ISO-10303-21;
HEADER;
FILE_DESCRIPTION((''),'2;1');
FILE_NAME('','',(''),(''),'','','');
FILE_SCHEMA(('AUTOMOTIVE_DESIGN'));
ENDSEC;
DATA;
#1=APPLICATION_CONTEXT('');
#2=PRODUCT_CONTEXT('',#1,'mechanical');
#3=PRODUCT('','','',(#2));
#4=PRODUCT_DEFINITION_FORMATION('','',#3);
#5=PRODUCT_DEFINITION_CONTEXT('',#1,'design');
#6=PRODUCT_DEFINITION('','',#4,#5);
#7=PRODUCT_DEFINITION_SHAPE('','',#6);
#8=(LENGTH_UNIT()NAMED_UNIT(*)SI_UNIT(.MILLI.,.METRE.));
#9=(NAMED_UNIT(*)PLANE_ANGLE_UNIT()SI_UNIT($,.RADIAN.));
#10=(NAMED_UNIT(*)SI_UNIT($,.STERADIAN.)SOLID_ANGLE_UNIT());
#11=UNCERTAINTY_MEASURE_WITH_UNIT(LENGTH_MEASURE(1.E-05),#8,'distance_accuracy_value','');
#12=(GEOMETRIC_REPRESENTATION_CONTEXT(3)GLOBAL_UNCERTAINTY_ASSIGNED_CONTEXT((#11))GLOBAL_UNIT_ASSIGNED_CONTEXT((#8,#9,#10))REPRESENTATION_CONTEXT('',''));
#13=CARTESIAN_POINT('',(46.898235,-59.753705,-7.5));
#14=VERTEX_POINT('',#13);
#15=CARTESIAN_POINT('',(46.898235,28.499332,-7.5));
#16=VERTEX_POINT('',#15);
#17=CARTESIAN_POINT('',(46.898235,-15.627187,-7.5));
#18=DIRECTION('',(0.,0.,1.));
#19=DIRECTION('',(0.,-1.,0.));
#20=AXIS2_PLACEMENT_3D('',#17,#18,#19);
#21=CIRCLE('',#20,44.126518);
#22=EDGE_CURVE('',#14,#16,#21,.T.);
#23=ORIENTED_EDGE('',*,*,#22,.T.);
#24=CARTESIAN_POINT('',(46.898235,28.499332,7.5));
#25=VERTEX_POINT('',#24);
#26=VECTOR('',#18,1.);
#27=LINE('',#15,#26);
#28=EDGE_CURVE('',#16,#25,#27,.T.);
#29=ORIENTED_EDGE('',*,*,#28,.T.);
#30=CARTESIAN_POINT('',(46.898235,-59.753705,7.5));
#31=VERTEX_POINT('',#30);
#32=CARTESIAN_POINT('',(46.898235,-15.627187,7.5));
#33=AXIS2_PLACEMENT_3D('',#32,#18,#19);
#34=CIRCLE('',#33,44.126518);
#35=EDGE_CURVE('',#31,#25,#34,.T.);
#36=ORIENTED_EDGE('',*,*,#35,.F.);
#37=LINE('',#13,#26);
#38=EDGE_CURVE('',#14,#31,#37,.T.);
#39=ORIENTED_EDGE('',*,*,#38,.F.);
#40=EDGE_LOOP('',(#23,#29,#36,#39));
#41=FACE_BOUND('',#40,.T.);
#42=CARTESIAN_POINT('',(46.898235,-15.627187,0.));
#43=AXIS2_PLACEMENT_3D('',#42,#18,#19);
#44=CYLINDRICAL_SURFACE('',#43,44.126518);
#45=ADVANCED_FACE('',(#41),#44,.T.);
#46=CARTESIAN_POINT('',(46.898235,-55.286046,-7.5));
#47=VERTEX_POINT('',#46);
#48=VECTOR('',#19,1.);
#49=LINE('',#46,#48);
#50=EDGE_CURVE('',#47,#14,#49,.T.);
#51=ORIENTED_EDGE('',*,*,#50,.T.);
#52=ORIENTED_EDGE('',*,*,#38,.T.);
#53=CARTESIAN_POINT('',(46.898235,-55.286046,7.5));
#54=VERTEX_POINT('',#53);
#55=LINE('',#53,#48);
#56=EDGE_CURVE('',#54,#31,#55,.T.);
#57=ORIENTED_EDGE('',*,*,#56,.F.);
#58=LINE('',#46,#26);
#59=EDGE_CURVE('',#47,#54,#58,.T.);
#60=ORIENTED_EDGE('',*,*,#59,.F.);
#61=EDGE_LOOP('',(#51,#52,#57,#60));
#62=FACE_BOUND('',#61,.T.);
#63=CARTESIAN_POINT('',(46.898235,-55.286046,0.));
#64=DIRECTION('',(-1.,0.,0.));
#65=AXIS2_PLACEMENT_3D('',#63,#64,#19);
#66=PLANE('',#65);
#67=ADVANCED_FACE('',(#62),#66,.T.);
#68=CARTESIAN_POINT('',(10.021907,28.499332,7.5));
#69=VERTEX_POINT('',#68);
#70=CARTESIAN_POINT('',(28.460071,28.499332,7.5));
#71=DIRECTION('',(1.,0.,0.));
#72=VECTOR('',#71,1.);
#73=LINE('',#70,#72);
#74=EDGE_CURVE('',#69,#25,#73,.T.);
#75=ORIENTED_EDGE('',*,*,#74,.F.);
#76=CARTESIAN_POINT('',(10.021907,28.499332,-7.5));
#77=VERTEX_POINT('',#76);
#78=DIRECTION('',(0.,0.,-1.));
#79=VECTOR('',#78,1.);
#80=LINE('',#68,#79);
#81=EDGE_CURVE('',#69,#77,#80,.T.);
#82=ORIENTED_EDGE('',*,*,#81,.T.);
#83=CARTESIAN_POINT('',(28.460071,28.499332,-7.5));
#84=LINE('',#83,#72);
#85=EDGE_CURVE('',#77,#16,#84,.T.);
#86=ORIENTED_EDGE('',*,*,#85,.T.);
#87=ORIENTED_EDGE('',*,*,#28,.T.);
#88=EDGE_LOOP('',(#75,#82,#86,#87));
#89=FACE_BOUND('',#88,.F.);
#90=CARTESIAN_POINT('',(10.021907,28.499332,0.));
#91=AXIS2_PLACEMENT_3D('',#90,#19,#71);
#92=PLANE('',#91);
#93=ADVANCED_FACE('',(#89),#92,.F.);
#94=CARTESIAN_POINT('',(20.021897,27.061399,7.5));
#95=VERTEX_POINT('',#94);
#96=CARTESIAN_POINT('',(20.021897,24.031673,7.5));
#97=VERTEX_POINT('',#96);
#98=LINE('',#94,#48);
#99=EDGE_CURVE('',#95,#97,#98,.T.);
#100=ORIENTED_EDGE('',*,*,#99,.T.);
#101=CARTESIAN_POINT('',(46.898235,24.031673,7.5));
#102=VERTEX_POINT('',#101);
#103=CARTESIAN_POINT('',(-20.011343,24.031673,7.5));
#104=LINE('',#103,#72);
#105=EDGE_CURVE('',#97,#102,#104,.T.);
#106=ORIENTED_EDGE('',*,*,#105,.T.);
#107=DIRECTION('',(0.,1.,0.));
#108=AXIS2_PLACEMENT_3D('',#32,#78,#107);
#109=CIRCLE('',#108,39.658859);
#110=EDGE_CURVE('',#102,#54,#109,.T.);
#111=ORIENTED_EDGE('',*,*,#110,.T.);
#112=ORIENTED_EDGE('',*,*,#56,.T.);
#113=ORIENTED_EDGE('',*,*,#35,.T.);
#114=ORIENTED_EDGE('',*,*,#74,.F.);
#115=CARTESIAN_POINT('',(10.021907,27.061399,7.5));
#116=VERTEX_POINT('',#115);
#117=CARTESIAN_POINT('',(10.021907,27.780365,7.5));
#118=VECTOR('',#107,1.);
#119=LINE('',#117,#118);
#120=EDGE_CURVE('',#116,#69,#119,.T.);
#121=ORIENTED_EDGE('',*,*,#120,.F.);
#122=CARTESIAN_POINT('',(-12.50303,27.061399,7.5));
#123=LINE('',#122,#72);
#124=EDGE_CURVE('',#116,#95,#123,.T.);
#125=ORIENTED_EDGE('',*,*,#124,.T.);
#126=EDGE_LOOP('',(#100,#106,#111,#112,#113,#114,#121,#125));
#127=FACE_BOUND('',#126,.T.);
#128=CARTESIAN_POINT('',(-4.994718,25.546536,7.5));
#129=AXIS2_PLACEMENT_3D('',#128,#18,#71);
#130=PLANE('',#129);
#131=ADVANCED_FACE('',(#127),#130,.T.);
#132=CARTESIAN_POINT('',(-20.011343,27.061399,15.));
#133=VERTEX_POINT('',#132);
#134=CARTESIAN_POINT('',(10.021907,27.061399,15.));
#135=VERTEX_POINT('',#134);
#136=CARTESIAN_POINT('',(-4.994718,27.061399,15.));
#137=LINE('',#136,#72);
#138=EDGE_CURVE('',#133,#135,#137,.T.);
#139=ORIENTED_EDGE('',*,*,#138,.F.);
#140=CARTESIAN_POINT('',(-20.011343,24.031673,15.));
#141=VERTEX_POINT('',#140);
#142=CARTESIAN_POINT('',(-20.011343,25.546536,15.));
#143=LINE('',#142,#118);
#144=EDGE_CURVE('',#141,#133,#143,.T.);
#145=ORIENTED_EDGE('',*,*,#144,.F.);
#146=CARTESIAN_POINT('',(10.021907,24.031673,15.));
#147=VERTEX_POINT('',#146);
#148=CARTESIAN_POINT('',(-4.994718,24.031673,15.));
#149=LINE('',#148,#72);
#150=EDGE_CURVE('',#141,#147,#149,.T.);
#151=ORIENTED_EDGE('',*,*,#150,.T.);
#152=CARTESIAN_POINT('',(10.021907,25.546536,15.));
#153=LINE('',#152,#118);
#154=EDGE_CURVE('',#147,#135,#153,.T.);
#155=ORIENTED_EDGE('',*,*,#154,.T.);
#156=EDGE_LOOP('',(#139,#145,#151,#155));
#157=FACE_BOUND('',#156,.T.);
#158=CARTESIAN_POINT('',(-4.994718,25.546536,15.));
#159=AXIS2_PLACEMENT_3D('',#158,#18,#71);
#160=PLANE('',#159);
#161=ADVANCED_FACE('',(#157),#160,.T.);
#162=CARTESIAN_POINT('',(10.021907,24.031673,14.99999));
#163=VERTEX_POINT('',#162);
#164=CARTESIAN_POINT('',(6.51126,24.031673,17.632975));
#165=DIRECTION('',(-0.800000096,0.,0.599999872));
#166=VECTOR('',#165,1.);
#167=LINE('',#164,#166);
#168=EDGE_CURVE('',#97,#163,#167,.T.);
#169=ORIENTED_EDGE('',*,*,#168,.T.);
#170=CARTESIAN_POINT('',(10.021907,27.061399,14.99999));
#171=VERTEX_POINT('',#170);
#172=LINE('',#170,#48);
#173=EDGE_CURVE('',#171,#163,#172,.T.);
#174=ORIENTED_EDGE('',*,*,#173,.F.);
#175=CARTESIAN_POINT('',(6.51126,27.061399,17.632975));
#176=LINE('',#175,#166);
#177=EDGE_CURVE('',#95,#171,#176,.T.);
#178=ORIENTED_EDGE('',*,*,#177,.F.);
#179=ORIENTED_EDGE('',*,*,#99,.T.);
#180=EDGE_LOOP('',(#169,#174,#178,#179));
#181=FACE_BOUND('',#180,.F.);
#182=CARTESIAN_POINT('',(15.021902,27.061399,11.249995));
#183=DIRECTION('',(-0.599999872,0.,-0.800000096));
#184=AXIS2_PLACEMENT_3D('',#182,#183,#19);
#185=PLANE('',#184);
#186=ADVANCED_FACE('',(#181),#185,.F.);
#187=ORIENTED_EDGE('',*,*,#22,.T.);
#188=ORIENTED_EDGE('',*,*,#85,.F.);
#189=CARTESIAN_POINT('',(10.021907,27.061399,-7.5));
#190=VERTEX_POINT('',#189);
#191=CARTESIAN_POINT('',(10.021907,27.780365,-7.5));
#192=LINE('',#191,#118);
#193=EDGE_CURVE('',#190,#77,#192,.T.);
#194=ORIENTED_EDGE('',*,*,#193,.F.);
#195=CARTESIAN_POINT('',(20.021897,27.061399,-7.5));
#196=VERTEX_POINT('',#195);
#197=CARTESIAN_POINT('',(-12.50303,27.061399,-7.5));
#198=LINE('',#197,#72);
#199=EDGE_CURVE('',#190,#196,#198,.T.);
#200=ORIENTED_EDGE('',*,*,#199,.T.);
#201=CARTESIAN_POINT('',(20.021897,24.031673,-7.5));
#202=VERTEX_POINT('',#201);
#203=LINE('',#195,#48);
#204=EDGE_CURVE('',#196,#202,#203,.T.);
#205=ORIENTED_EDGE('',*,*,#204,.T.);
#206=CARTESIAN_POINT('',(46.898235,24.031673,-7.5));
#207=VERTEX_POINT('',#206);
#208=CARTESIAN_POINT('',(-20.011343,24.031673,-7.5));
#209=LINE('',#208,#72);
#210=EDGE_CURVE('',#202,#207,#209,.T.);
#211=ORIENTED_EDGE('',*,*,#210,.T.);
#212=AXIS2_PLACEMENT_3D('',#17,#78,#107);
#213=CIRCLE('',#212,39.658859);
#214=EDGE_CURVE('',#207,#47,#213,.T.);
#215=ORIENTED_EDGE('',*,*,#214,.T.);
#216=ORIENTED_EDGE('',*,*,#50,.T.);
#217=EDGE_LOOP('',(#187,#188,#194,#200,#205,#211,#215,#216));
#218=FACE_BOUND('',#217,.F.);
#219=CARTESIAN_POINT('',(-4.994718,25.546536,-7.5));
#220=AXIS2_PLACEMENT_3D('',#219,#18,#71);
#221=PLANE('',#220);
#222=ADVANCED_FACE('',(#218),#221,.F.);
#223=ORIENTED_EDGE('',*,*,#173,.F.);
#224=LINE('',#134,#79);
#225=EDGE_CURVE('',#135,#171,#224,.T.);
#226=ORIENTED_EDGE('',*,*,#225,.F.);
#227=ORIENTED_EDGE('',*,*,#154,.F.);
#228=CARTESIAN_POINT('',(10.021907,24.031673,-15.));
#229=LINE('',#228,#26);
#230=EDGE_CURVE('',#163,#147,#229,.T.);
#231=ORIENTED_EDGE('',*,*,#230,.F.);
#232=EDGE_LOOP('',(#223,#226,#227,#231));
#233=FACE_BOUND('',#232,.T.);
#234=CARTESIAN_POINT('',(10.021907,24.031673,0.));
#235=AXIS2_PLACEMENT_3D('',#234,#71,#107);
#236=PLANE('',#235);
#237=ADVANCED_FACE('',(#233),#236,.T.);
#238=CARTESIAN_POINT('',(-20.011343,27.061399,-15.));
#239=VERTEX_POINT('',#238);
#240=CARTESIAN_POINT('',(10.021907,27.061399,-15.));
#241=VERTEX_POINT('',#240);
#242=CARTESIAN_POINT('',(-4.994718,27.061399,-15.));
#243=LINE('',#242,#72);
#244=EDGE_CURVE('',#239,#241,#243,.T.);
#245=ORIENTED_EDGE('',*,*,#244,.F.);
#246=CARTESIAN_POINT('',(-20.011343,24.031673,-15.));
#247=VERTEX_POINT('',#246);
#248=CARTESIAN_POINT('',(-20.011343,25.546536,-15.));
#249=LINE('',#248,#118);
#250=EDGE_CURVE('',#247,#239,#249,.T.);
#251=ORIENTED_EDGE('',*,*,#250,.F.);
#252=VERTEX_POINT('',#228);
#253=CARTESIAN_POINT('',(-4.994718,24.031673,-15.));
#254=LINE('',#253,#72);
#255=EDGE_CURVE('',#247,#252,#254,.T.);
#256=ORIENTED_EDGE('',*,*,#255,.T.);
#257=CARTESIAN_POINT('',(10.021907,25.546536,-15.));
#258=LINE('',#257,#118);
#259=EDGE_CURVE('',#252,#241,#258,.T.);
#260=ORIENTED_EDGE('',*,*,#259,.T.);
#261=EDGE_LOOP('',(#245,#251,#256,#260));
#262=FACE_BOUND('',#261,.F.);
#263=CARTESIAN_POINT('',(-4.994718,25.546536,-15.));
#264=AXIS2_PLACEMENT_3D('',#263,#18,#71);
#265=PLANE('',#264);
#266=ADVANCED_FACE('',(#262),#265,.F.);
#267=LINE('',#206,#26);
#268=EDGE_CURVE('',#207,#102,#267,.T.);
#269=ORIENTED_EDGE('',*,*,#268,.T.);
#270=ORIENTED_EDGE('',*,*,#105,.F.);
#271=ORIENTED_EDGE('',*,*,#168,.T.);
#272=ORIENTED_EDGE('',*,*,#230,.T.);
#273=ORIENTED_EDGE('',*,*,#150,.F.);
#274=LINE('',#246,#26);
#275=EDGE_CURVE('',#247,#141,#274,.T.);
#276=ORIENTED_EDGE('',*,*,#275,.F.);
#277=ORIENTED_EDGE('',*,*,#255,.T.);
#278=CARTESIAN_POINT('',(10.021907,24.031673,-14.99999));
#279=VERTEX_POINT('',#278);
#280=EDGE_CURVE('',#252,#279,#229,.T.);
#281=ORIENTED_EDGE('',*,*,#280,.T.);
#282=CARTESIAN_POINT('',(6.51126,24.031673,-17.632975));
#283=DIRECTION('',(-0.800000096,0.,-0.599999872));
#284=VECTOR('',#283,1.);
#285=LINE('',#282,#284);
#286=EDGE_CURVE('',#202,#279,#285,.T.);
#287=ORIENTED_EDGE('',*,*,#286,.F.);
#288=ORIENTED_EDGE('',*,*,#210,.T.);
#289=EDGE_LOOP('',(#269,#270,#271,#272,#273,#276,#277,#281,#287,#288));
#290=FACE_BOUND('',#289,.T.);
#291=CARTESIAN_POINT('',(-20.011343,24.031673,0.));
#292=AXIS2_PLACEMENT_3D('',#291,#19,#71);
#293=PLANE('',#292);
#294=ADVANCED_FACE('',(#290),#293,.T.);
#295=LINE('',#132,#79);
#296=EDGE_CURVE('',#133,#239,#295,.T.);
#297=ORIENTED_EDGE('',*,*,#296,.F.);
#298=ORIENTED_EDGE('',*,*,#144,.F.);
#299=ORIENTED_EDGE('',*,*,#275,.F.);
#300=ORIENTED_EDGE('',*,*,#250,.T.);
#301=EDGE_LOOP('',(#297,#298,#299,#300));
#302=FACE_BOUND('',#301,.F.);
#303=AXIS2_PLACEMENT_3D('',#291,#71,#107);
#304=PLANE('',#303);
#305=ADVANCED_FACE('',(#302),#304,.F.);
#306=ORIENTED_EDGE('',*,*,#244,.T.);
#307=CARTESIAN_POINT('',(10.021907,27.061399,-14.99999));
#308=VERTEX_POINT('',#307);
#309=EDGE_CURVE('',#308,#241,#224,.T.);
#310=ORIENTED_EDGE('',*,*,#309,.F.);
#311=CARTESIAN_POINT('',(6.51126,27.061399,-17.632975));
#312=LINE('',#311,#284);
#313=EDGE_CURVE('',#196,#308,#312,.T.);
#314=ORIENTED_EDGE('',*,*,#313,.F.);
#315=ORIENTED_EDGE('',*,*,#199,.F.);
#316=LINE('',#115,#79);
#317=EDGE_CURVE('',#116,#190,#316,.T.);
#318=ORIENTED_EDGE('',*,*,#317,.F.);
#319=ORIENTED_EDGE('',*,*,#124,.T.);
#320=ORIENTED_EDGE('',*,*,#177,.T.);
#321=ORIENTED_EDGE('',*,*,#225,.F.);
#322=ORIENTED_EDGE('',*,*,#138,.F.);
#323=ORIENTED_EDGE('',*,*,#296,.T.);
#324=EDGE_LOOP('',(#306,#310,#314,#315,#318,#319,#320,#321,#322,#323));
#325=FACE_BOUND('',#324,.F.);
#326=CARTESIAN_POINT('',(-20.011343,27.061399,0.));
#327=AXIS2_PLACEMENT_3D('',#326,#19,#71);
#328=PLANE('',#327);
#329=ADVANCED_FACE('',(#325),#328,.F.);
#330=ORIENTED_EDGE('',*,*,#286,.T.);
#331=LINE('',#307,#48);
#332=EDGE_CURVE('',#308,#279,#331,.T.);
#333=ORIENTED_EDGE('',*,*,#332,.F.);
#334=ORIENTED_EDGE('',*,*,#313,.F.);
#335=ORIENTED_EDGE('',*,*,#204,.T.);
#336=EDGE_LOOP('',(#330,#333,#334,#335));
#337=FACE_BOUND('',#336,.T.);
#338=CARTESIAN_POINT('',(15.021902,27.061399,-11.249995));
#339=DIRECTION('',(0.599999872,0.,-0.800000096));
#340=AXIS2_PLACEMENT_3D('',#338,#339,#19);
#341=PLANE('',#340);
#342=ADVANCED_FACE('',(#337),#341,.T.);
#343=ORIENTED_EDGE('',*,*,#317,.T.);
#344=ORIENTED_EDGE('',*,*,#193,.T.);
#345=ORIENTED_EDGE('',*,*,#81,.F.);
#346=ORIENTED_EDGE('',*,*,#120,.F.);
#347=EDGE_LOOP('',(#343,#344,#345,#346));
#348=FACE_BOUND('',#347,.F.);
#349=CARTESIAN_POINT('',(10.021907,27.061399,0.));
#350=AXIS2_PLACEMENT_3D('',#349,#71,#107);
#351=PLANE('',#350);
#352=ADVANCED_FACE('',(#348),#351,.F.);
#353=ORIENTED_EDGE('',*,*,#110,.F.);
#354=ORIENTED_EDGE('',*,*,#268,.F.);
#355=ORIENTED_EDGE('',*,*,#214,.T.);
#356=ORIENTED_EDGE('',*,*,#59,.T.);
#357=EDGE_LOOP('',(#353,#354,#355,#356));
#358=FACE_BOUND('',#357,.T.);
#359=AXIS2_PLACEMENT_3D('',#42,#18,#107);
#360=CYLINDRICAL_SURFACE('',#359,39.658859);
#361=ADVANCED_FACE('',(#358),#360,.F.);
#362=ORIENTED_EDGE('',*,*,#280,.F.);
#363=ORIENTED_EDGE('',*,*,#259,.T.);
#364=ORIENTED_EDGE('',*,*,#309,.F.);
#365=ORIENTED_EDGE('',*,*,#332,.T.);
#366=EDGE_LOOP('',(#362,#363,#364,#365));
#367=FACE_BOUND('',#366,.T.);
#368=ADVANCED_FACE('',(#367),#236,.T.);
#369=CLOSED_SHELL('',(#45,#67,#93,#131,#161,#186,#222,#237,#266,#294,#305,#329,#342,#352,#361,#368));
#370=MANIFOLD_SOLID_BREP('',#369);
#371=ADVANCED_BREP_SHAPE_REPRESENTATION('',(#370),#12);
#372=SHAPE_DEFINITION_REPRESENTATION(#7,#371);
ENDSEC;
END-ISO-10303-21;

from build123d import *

# Parameters (mm, degrees)
F0_W     = 30.0332503393
F0_H     = 3.0297264457
F1_DEPTH = 15
F0_W_2   = 36.8763273582
F0_H_2   = 1.4379325638
F2_DEPTH = 7.5
F3_SIZE2 = 7.49999
F3_SIZE  = 9.99999
F4_SIZE2 = 7.49999
F4_SIZE  = 9.99999


# Not quite as in the source:
# - a fillet or chamfer is up to 0.001 mm smaller than in the source, because OpenCascade refuses the exact size


with BuildPart() as f1:
    # F0 (on Top) → F1 (new body, symmetric)
    with BuildSketch(Plane.XY):
        with Locations((-4.9947178923, 25.5465358496)):
            Rectangle(F0_W, F0_H)
    extrude(amount=F1_DEPTH, both=True)

    # F0 (on Top) → F2 (join, symmetric)
    with BuildSketch(Plane.XY):
        with Locations((-4.9947178923, 25.5465358496)):
            Rectangle(F0_W, F0_H)
        with Locations((28.4600709565, 27.7803653543)):
            Rectangle(F0_W_2, F0_H_2)
        with Locations((28.4600709565, 25.5465358496)):
            Rectangle(F0_W_2, F0_H)
        with BuildLine():
            ThreePointArc((46.8982346356, -58.3157722523), (89.586820298, -15.62718659), (46.8982346356, 27.0613990724))
            Line((46.8982346356, 27.0613990724), (46.8982346356, 24.0316726267))
            ThreePointArc((46.8982346356, 24.0316726267), (86.5570938523, -15.62718659), (46.8982346356, -55.2860458066))
            Line((46.8982346356, -55.2860458066), (46.8982346356, -58.3157722523))
        make_face()
        with BuildLine():
            Line((46.8982346356, 28.4993316362), (46.8982346356, 27.0613990724))
            ThreePointArc((46.8982346356, 27.0613990724), (89.586820298, -15.62718659), (46.8982346356, -58.3157722523))
            Line((46.8982346356, -58.3157722523), (46.8982346356, -59.7537048161))
            ThreePointArc((46.8982346356, -59.7537048161), (91.0247528617, -15.62718659), (46.8982346356, 28.4993316362))
        make_face()
    extrude(amount=F2_DEPTH, both=True)

    # F3 (size 10 and 7.5 in the source; OpenCascade refuses exactly that, so slightly less here)
    f3_edges = [f1.edges().sort_by_distance(p)[0] for p in [
        (10.021907, 25.546536, 7.5),
    ]]
    f3_side = f1.faces().sort_by_distance((11.219825, 27.780365, 7.5))[0]
    chamfer(f3_edges, length=F3_SIZE, length2=F3_SIZE2, reference=f3_side)

    # F4 (size 10 and 7.5 in the source; OpenCascade refuses exactly that, so slightly less here)
    f4_edges = [f1.edges().sort_by_distance(p)[0] for p in [
        (10.021907, 25.546536, -7.5),
    ]]
    f4_side = f1.faces().sort_by_distance((11.219825, 27.780365, -7.5))[0]
    chamfer(f4_edges, length=F4_SIZE, length2=F4_SIZE2, reference=f4_side)


solid = f1.part
